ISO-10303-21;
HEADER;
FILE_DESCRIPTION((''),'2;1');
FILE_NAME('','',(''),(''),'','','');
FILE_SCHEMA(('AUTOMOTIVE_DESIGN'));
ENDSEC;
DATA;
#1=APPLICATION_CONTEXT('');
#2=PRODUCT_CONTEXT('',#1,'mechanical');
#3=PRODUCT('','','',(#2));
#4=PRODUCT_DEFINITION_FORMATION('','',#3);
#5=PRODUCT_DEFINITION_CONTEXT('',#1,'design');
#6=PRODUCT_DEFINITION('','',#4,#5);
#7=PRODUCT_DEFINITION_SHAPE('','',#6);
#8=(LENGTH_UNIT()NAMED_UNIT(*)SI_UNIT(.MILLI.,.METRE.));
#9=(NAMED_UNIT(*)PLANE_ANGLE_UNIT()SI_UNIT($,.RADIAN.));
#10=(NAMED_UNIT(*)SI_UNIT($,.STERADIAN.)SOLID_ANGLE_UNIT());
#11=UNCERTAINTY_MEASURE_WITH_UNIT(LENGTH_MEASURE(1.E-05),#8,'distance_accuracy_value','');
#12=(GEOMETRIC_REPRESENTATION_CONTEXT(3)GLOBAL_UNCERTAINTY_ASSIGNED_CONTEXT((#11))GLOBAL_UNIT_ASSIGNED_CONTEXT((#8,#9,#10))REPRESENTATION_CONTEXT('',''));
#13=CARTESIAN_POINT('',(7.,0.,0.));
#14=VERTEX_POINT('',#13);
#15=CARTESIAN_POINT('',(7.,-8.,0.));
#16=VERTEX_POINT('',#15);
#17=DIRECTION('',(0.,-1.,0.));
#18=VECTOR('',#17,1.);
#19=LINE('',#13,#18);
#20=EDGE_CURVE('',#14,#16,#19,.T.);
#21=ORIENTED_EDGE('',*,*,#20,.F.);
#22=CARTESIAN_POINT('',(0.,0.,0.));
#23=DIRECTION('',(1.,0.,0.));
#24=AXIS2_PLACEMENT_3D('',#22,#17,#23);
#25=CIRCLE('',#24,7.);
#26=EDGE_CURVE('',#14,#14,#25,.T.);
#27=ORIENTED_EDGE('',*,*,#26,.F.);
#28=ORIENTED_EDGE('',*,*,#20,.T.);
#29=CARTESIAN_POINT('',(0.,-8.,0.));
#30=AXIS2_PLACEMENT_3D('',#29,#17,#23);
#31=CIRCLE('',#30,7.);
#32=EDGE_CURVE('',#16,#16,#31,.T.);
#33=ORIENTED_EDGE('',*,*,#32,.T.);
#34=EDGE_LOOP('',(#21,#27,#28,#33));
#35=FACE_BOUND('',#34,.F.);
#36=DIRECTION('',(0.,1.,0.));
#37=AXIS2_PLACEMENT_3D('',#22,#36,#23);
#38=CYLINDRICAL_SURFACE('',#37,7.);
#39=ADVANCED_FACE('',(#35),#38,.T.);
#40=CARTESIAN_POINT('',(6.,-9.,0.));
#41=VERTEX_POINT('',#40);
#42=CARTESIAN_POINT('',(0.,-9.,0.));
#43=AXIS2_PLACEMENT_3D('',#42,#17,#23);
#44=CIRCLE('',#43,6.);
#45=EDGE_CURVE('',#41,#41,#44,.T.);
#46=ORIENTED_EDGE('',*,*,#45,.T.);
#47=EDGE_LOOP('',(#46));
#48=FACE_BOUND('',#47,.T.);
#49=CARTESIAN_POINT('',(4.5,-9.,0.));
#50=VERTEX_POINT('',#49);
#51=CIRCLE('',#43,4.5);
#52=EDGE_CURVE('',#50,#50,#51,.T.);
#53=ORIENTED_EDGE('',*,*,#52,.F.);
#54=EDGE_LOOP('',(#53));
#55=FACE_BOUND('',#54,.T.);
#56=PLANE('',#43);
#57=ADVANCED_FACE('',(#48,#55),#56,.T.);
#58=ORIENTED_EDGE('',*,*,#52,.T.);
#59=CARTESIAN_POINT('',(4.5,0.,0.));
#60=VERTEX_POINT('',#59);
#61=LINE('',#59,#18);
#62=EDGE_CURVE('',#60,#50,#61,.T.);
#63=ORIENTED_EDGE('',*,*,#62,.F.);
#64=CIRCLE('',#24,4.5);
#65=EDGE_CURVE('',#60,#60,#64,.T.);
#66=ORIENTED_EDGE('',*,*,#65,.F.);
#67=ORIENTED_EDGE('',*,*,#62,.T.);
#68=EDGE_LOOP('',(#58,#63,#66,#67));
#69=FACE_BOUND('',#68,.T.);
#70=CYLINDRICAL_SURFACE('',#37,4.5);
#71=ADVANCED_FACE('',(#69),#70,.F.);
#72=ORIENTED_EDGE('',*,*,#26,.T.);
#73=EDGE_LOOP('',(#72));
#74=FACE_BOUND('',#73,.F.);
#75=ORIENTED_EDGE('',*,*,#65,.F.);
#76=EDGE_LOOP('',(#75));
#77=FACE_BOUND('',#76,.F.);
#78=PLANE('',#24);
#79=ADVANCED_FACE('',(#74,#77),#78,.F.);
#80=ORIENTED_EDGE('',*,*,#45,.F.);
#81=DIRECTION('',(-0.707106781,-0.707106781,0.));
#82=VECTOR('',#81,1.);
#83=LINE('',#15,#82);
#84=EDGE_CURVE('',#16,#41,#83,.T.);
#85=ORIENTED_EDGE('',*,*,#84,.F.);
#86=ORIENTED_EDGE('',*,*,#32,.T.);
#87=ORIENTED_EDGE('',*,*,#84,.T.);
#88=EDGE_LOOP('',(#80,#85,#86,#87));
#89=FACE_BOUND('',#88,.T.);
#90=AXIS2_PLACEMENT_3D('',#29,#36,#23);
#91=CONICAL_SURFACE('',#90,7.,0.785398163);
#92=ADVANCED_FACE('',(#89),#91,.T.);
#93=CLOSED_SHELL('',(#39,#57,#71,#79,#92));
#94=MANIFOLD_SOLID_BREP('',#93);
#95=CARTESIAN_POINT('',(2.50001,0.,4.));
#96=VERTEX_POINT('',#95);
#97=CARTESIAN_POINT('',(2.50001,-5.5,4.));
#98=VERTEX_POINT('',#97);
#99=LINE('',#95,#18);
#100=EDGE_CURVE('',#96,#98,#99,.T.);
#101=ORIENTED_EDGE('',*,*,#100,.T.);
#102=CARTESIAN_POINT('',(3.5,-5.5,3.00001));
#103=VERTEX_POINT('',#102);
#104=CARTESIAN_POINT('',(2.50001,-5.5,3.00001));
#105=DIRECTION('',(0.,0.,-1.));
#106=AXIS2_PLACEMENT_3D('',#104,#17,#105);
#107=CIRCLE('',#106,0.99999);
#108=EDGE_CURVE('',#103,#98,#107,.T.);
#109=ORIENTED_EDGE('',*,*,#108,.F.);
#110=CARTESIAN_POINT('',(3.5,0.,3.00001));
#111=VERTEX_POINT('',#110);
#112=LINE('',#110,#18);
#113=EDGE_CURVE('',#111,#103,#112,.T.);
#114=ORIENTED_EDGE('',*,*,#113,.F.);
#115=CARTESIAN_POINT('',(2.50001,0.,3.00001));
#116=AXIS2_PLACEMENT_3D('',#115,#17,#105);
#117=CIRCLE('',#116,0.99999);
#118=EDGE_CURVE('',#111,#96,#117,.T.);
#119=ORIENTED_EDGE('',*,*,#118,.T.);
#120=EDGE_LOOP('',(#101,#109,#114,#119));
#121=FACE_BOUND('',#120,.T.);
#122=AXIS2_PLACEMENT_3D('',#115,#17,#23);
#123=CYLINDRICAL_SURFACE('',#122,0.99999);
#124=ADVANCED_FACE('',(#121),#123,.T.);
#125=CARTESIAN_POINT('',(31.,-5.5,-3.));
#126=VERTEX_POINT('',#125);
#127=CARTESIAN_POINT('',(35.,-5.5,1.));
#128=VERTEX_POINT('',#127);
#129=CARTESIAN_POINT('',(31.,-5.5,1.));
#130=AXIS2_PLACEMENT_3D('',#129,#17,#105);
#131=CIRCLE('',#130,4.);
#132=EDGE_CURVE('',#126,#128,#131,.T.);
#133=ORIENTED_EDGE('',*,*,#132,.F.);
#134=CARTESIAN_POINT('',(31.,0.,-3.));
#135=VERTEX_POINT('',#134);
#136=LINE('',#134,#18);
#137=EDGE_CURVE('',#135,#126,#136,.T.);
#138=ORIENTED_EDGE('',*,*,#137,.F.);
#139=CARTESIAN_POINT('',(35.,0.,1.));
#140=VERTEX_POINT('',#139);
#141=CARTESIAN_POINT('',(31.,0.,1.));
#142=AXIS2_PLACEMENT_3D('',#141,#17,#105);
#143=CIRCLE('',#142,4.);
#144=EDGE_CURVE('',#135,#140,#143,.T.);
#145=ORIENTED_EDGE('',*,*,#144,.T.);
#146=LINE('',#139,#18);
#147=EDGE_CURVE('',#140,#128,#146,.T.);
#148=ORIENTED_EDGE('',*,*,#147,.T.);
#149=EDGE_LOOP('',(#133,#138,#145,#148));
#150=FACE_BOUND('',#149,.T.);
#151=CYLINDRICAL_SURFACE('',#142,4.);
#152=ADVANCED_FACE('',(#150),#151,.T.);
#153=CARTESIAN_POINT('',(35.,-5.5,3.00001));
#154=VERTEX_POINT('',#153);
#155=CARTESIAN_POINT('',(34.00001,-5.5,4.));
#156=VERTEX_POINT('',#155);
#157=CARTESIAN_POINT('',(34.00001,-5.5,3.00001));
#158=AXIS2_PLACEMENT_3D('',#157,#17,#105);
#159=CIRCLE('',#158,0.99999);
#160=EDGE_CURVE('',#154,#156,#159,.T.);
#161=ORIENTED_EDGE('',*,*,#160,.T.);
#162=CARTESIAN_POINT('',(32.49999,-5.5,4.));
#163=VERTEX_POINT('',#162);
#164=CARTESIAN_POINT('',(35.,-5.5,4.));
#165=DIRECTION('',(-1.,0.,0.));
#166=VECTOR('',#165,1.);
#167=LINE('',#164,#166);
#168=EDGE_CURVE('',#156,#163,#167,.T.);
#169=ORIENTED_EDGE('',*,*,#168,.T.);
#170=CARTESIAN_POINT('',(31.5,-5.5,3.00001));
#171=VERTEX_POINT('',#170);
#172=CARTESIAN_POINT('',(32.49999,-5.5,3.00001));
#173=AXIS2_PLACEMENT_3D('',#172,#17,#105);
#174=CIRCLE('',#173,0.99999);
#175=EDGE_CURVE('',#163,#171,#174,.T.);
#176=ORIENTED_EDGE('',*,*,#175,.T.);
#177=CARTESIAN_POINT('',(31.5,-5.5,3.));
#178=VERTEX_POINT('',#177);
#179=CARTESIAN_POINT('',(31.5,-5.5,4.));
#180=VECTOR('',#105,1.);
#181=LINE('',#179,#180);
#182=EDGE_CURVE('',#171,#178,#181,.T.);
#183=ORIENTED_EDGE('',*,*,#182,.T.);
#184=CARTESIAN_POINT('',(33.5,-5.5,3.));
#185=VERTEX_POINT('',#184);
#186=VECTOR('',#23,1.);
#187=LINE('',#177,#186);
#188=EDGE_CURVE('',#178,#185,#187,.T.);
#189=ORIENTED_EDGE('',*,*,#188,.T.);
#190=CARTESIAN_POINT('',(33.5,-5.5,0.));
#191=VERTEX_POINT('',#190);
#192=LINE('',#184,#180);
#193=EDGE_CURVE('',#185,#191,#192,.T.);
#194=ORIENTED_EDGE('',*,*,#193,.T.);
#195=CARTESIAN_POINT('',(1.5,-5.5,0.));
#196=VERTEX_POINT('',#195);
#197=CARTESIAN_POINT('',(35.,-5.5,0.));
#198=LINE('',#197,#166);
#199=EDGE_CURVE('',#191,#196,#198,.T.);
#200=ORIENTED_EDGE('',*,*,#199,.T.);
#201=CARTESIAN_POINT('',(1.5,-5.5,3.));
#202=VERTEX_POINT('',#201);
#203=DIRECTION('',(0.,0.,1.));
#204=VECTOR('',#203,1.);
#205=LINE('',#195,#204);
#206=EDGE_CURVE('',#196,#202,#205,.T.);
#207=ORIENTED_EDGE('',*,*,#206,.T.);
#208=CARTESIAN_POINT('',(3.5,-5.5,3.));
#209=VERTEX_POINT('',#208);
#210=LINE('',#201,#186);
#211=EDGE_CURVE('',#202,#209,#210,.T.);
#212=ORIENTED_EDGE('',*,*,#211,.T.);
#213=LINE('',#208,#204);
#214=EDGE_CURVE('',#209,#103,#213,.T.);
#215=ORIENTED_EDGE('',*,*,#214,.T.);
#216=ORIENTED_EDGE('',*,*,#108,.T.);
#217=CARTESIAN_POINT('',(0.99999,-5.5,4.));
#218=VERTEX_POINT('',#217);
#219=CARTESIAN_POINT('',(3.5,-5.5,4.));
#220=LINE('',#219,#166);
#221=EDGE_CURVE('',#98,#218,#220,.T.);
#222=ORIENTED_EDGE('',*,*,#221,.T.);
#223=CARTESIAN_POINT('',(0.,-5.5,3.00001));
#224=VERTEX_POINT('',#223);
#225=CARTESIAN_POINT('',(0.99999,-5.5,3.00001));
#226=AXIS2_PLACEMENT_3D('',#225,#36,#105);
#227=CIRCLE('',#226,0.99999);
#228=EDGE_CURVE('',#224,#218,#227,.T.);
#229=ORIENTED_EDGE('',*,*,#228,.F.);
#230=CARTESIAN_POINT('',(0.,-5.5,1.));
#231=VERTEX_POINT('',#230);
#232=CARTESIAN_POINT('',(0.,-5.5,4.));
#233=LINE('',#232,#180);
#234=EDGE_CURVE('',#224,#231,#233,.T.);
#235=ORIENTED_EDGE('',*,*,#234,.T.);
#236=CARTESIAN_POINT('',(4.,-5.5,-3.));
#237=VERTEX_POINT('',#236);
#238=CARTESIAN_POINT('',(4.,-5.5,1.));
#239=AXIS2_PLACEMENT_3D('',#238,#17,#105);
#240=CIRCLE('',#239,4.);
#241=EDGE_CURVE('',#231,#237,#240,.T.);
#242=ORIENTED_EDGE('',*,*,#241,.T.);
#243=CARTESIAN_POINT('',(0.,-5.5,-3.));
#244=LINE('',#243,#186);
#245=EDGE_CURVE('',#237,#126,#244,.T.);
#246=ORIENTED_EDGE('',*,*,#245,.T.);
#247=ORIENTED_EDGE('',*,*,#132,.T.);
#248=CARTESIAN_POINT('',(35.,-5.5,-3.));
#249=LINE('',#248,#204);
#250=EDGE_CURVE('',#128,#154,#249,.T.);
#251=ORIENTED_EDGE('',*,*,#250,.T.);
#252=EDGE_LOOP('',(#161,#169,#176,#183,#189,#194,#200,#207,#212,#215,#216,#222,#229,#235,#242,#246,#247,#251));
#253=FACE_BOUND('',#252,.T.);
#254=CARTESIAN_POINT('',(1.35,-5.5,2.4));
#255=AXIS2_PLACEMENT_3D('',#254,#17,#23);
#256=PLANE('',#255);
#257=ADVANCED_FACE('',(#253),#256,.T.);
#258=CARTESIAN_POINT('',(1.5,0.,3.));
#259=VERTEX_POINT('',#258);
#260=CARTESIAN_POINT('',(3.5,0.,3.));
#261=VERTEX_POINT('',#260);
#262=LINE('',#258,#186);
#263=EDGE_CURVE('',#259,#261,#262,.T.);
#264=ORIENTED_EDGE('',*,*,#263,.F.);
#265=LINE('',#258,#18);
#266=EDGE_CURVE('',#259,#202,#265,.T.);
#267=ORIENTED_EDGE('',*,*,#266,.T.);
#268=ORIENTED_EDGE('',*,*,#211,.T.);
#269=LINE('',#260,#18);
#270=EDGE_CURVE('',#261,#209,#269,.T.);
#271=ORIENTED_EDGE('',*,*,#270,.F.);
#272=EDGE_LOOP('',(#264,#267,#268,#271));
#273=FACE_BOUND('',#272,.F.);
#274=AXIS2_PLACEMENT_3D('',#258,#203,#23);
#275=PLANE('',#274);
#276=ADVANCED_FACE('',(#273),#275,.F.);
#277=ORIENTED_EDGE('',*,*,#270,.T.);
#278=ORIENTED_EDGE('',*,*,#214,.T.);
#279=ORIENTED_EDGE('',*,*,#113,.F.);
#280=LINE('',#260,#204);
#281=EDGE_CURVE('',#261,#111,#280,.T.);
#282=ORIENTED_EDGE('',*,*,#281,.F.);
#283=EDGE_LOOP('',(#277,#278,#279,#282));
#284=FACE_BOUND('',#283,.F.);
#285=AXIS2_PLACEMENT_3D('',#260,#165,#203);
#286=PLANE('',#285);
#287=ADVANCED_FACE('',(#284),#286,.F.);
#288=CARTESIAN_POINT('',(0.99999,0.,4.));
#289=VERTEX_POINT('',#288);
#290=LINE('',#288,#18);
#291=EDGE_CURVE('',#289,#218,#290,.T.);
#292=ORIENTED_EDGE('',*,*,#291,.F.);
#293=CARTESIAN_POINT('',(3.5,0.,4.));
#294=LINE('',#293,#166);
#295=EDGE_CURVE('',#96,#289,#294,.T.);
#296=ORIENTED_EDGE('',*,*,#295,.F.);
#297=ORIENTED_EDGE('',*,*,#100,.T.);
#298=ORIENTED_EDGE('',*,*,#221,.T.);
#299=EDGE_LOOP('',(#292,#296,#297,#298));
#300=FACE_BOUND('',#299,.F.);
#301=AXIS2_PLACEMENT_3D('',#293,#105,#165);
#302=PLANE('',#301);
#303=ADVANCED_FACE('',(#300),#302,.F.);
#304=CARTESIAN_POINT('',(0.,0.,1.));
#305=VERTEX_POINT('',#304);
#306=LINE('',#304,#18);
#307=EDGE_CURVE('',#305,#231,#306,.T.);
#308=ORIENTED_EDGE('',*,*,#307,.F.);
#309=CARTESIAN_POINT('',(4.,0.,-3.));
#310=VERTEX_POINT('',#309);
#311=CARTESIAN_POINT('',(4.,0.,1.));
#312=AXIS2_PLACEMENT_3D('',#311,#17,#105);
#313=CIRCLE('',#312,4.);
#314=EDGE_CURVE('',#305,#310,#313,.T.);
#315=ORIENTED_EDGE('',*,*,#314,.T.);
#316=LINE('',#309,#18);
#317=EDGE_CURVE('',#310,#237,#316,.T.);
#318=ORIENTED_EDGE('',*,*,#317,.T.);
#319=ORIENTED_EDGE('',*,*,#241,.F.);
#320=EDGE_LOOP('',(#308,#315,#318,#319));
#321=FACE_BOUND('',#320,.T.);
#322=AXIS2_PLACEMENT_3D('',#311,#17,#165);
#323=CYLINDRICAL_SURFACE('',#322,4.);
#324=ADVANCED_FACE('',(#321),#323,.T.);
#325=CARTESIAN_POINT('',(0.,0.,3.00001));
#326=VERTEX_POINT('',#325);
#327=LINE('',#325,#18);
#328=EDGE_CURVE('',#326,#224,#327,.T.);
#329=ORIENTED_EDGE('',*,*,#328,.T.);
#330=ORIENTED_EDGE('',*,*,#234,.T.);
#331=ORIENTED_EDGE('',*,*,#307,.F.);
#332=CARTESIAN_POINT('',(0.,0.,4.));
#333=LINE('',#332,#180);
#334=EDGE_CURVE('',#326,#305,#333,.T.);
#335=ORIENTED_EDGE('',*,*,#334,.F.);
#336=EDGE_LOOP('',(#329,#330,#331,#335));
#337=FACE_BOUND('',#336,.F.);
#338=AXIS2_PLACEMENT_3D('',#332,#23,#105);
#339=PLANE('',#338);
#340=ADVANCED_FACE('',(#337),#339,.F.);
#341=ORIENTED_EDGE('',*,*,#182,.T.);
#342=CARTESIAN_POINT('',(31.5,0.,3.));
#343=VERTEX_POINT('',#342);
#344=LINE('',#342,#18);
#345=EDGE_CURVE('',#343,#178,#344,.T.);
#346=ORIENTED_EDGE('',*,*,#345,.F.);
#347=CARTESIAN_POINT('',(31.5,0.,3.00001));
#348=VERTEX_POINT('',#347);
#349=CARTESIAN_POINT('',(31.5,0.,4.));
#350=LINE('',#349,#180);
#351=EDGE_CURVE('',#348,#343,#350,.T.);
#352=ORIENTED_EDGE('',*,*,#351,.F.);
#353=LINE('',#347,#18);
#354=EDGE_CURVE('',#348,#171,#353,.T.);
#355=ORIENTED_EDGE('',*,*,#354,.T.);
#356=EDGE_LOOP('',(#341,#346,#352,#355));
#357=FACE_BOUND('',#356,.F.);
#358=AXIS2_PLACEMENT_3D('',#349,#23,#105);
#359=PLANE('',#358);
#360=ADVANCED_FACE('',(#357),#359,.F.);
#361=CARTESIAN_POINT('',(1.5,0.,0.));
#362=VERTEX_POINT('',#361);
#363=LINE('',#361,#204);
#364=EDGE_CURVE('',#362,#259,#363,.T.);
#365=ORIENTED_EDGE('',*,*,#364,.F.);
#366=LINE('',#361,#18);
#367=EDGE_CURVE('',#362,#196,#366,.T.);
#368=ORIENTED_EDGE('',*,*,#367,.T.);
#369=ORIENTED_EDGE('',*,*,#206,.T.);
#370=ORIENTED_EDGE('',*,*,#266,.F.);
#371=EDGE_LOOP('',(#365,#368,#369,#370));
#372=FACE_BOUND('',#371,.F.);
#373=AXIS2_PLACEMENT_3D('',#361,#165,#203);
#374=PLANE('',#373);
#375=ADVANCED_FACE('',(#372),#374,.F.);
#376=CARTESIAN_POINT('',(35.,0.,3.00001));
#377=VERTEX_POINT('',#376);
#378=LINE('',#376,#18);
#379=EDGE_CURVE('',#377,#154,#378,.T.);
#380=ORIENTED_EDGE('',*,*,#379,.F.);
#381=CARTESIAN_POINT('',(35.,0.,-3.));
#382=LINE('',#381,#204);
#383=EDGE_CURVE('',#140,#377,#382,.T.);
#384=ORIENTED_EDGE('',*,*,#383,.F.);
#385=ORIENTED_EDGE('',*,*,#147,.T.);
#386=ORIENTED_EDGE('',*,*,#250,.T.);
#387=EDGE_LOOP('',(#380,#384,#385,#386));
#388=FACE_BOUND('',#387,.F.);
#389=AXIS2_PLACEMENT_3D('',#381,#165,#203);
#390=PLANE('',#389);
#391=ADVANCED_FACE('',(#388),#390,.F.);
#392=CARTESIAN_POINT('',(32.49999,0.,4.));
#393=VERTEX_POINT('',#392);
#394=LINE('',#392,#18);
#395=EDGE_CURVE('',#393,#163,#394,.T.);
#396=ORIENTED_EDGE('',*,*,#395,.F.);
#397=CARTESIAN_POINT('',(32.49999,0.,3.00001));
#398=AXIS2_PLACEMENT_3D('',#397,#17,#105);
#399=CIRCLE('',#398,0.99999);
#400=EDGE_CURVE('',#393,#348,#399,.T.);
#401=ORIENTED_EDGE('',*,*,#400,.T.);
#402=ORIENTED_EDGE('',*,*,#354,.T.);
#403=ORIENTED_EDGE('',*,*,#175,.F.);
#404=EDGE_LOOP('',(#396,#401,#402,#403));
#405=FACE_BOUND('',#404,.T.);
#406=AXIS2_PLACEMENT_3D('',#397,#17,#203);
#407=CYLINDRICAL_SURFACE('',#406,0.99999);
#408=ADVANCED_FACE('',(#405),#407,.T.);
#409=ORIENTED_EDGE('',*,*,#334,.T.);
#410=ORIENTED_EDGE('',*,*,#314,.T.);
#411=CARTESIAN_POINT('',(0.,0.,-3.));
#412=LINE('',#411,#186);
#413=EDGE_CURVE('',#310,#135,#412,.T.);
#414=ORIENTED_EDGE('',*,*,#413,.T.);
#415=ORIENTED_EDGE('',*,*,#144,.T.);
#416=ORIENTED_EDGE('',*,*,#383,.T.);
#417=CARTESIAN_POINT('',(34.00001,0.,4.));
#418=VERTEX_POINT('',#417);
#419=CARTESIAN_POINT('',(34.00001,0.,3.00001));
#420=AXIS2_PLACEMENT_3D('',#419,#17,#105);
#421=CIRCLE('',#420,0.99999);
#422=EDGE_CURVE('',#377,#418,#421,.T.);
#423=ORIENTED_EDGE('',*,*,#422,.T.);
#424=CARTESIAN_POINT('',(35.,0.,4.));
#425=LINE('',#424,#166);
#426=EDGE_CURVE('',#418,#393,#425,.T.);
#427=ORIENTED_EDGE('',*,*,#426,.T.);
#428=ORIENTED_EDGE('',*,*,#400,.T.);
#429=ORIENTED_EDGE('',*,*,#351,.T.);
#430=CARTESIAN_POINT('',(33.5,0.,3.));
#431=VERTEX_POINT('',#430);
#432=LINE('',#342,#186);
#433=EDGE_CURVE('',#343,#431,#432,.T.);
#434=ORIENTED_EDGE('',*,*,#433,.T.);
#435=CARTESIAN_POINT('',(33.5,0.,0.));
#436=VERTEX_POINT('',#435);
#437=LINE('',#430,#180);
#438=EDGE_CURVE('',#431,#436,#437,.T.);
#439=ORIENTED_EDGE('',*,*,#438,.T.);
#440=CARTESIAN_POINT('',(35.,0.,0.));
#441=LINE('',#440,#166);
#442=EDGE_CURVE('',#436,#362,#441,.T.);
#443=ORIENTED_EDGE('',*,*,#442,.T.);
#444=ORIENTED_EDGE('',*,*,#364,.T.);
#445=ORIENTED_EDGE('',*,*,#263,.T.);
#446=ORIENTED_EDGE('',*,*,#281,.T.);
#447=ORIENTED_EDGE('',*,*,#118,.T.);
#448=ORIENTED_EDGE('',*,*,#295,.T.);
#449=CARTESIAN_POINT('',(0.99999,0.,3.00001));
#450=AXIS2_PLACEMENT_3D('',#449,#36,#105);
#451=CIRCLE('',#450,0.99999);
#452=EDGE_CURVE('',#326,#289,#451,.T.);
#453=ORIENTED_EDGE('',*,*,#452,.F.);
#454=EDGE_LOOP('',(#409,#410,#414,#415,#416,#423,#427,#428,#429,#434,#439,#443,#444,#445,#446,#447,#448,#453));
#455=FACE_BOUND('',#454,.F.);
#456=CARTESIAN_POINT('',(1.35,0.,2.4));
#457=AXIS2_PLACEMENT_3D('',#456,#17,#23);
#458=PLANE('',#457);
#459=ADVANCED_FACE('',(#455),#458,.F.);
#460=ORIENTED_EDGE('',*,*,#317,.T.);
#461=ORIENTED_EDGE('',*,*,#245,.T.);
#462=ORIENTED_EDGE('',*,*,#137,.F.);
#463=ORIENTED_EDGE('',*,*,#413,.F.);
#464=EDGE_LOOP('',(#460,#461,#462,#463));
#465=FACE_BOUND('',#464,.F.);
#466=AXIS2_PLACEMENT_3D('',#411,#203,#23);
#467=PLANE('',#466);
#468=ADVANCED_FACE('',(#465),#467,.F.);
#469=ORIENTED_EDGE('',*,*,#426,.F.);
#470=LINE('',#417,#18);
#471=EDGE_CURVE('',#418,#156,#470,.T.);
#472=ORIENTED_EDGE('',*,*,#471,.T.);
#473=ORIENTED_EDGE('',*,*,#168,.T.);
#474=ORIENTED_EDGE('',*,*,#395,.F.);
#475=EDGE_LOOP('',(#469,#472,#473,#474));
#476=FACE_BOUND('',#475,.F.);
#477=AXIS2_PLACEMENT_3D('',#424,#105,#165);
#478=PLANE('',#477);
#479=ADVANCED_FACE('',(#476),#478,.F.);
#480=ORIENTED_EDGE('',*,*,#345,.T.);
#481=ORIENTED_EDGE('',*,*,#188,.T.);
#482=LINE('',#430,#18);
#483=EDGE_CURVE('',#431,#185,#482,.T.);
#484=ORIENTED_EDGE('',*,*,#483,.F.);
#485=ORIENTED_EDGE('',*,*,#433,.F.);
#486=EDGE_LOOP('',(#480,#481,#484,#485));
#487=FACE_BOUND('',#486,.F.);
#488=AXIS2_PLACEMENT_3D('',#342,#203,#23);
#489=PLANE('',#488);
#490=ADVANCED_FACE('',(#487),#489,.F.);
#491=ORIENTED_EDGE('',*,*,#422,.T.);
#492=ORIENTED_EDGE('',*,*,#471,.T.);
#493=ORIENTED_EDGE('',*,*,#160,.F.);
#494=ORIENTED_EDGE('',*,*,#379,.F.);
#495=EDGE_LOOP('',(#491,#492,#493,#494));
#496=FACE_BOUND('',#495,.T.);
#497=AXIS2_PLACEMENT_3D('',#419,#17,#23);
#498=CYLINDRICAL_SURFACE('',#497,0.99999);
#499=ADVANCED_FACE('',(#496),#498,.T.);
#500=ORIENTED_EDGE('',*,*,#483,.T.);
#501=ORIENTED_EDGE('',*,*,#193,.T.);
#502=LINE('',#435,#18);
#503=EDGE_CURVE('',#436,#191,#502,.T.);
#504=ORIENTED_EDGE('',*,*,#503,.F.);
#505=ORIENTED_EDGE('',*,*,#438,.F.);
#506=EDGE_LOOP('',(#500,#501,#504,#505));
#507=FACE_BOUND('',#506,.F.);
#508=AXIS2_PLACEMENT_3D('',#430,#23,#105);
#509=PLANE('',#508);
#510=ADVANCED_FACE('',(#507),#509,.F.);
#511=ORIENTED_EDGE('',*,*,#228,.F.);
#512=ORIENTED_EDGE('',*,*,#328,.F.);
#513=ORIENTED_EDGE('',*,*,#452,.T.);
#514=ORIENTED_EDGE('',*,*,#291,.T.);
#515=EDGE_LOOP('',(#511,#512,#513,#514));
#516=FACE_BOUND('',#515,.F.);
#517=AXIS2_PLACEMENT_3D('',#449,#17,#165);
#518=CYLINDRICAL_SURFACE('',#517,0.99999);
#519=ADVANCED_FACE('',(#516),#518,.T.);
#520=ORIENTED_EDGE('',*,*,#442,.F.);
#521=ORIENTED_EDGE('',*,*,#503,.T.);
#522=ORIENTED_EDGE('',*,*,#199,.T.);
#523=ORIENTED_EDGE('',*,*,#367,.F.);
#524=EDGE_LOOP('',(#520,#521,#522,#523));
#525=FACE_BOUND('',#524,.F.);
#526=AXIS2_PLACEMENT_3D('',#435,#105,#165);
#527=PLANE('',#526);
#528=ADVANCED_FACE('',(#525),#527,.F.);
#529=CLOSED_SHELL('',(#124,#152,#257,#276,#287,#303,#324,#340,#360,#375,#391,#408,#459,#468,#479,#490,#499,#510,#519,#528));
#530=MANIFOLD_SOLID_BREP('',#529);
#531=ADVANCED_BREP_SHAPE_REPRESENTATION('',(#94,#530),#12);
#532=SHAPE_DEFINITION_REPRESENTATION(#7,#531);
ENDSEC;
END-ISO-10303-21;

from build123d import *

# Parameters (mm, degrees)
F1_DEPTH = 5.5
F2_R     = 0.99999
F3_R     = 4
F4_R     = 7
F4_R_2   = 4.5
F5_DEPTH = 9
F6_SIZE  = 1


# Not quite as in the source:
# - a fillet or chamfer is up to 0.001 mm smaller than in the source, because OpenCascade refuses the exact size


with BuildPart() as f1:
    # F0 (on Front) → F1 (new body)
    with BuildSketch(Plane.XZ):
        Polygon((0, 4), (0, 0), (1.5, 0), (1.5, 3), (3.5, 3), (3.5, 4), align=None)
        Polygon((1.5, 0), (0, 0), (0, -3), (35, -3), (35, 0), (33.5, 0), (17.5, 0), align=None)
        Polygon((33.5, 3), (33.5, 0), (35, 0), (35, 4), (31.5, 4), (31.5, 3), align=None)
    extrude(amount=F1_DEPTH)

    # F2 (radius 1 in the source; OpenCascade refuses exactly that, so slightly less here)
    f2_edges = [f1.edges().sort_by_distance(p)[0] for p in [
        (31.5, -2.75, 4),
        (3.5, -2.75, 4),
        (35, -2.75, 4),
        (0, -2.75, 4),
    ]]
    fillet(f2_edges, radius=F2_R)

    # F3
    f3_edges = [f1.edges().sort_by_distance(p)[0] for p in [
        (0, -2.75, -3),
        (35, -2.75, -3),
    ]]
    fillet(f3_edges, radius=F3_R)


with BuildPart() as f5:
    # F4 (on Front) → F5 (new body)
    with BuildSketch(Plane.XZ):
        Circle(F4_R)
        Circle(F4_R_2, mode=Mode.SUBTRACT)
    extrude(amount=F5_DEPTH)

    # F6
    f6_edges = [f5.edges().sort_by_distance(p)[0] for p in [
        (-7, -9, 0),
    ]]
    chamfer(f6_edges, length=F6_SIZE)


solid = Compound([f1.part, f5.part])
